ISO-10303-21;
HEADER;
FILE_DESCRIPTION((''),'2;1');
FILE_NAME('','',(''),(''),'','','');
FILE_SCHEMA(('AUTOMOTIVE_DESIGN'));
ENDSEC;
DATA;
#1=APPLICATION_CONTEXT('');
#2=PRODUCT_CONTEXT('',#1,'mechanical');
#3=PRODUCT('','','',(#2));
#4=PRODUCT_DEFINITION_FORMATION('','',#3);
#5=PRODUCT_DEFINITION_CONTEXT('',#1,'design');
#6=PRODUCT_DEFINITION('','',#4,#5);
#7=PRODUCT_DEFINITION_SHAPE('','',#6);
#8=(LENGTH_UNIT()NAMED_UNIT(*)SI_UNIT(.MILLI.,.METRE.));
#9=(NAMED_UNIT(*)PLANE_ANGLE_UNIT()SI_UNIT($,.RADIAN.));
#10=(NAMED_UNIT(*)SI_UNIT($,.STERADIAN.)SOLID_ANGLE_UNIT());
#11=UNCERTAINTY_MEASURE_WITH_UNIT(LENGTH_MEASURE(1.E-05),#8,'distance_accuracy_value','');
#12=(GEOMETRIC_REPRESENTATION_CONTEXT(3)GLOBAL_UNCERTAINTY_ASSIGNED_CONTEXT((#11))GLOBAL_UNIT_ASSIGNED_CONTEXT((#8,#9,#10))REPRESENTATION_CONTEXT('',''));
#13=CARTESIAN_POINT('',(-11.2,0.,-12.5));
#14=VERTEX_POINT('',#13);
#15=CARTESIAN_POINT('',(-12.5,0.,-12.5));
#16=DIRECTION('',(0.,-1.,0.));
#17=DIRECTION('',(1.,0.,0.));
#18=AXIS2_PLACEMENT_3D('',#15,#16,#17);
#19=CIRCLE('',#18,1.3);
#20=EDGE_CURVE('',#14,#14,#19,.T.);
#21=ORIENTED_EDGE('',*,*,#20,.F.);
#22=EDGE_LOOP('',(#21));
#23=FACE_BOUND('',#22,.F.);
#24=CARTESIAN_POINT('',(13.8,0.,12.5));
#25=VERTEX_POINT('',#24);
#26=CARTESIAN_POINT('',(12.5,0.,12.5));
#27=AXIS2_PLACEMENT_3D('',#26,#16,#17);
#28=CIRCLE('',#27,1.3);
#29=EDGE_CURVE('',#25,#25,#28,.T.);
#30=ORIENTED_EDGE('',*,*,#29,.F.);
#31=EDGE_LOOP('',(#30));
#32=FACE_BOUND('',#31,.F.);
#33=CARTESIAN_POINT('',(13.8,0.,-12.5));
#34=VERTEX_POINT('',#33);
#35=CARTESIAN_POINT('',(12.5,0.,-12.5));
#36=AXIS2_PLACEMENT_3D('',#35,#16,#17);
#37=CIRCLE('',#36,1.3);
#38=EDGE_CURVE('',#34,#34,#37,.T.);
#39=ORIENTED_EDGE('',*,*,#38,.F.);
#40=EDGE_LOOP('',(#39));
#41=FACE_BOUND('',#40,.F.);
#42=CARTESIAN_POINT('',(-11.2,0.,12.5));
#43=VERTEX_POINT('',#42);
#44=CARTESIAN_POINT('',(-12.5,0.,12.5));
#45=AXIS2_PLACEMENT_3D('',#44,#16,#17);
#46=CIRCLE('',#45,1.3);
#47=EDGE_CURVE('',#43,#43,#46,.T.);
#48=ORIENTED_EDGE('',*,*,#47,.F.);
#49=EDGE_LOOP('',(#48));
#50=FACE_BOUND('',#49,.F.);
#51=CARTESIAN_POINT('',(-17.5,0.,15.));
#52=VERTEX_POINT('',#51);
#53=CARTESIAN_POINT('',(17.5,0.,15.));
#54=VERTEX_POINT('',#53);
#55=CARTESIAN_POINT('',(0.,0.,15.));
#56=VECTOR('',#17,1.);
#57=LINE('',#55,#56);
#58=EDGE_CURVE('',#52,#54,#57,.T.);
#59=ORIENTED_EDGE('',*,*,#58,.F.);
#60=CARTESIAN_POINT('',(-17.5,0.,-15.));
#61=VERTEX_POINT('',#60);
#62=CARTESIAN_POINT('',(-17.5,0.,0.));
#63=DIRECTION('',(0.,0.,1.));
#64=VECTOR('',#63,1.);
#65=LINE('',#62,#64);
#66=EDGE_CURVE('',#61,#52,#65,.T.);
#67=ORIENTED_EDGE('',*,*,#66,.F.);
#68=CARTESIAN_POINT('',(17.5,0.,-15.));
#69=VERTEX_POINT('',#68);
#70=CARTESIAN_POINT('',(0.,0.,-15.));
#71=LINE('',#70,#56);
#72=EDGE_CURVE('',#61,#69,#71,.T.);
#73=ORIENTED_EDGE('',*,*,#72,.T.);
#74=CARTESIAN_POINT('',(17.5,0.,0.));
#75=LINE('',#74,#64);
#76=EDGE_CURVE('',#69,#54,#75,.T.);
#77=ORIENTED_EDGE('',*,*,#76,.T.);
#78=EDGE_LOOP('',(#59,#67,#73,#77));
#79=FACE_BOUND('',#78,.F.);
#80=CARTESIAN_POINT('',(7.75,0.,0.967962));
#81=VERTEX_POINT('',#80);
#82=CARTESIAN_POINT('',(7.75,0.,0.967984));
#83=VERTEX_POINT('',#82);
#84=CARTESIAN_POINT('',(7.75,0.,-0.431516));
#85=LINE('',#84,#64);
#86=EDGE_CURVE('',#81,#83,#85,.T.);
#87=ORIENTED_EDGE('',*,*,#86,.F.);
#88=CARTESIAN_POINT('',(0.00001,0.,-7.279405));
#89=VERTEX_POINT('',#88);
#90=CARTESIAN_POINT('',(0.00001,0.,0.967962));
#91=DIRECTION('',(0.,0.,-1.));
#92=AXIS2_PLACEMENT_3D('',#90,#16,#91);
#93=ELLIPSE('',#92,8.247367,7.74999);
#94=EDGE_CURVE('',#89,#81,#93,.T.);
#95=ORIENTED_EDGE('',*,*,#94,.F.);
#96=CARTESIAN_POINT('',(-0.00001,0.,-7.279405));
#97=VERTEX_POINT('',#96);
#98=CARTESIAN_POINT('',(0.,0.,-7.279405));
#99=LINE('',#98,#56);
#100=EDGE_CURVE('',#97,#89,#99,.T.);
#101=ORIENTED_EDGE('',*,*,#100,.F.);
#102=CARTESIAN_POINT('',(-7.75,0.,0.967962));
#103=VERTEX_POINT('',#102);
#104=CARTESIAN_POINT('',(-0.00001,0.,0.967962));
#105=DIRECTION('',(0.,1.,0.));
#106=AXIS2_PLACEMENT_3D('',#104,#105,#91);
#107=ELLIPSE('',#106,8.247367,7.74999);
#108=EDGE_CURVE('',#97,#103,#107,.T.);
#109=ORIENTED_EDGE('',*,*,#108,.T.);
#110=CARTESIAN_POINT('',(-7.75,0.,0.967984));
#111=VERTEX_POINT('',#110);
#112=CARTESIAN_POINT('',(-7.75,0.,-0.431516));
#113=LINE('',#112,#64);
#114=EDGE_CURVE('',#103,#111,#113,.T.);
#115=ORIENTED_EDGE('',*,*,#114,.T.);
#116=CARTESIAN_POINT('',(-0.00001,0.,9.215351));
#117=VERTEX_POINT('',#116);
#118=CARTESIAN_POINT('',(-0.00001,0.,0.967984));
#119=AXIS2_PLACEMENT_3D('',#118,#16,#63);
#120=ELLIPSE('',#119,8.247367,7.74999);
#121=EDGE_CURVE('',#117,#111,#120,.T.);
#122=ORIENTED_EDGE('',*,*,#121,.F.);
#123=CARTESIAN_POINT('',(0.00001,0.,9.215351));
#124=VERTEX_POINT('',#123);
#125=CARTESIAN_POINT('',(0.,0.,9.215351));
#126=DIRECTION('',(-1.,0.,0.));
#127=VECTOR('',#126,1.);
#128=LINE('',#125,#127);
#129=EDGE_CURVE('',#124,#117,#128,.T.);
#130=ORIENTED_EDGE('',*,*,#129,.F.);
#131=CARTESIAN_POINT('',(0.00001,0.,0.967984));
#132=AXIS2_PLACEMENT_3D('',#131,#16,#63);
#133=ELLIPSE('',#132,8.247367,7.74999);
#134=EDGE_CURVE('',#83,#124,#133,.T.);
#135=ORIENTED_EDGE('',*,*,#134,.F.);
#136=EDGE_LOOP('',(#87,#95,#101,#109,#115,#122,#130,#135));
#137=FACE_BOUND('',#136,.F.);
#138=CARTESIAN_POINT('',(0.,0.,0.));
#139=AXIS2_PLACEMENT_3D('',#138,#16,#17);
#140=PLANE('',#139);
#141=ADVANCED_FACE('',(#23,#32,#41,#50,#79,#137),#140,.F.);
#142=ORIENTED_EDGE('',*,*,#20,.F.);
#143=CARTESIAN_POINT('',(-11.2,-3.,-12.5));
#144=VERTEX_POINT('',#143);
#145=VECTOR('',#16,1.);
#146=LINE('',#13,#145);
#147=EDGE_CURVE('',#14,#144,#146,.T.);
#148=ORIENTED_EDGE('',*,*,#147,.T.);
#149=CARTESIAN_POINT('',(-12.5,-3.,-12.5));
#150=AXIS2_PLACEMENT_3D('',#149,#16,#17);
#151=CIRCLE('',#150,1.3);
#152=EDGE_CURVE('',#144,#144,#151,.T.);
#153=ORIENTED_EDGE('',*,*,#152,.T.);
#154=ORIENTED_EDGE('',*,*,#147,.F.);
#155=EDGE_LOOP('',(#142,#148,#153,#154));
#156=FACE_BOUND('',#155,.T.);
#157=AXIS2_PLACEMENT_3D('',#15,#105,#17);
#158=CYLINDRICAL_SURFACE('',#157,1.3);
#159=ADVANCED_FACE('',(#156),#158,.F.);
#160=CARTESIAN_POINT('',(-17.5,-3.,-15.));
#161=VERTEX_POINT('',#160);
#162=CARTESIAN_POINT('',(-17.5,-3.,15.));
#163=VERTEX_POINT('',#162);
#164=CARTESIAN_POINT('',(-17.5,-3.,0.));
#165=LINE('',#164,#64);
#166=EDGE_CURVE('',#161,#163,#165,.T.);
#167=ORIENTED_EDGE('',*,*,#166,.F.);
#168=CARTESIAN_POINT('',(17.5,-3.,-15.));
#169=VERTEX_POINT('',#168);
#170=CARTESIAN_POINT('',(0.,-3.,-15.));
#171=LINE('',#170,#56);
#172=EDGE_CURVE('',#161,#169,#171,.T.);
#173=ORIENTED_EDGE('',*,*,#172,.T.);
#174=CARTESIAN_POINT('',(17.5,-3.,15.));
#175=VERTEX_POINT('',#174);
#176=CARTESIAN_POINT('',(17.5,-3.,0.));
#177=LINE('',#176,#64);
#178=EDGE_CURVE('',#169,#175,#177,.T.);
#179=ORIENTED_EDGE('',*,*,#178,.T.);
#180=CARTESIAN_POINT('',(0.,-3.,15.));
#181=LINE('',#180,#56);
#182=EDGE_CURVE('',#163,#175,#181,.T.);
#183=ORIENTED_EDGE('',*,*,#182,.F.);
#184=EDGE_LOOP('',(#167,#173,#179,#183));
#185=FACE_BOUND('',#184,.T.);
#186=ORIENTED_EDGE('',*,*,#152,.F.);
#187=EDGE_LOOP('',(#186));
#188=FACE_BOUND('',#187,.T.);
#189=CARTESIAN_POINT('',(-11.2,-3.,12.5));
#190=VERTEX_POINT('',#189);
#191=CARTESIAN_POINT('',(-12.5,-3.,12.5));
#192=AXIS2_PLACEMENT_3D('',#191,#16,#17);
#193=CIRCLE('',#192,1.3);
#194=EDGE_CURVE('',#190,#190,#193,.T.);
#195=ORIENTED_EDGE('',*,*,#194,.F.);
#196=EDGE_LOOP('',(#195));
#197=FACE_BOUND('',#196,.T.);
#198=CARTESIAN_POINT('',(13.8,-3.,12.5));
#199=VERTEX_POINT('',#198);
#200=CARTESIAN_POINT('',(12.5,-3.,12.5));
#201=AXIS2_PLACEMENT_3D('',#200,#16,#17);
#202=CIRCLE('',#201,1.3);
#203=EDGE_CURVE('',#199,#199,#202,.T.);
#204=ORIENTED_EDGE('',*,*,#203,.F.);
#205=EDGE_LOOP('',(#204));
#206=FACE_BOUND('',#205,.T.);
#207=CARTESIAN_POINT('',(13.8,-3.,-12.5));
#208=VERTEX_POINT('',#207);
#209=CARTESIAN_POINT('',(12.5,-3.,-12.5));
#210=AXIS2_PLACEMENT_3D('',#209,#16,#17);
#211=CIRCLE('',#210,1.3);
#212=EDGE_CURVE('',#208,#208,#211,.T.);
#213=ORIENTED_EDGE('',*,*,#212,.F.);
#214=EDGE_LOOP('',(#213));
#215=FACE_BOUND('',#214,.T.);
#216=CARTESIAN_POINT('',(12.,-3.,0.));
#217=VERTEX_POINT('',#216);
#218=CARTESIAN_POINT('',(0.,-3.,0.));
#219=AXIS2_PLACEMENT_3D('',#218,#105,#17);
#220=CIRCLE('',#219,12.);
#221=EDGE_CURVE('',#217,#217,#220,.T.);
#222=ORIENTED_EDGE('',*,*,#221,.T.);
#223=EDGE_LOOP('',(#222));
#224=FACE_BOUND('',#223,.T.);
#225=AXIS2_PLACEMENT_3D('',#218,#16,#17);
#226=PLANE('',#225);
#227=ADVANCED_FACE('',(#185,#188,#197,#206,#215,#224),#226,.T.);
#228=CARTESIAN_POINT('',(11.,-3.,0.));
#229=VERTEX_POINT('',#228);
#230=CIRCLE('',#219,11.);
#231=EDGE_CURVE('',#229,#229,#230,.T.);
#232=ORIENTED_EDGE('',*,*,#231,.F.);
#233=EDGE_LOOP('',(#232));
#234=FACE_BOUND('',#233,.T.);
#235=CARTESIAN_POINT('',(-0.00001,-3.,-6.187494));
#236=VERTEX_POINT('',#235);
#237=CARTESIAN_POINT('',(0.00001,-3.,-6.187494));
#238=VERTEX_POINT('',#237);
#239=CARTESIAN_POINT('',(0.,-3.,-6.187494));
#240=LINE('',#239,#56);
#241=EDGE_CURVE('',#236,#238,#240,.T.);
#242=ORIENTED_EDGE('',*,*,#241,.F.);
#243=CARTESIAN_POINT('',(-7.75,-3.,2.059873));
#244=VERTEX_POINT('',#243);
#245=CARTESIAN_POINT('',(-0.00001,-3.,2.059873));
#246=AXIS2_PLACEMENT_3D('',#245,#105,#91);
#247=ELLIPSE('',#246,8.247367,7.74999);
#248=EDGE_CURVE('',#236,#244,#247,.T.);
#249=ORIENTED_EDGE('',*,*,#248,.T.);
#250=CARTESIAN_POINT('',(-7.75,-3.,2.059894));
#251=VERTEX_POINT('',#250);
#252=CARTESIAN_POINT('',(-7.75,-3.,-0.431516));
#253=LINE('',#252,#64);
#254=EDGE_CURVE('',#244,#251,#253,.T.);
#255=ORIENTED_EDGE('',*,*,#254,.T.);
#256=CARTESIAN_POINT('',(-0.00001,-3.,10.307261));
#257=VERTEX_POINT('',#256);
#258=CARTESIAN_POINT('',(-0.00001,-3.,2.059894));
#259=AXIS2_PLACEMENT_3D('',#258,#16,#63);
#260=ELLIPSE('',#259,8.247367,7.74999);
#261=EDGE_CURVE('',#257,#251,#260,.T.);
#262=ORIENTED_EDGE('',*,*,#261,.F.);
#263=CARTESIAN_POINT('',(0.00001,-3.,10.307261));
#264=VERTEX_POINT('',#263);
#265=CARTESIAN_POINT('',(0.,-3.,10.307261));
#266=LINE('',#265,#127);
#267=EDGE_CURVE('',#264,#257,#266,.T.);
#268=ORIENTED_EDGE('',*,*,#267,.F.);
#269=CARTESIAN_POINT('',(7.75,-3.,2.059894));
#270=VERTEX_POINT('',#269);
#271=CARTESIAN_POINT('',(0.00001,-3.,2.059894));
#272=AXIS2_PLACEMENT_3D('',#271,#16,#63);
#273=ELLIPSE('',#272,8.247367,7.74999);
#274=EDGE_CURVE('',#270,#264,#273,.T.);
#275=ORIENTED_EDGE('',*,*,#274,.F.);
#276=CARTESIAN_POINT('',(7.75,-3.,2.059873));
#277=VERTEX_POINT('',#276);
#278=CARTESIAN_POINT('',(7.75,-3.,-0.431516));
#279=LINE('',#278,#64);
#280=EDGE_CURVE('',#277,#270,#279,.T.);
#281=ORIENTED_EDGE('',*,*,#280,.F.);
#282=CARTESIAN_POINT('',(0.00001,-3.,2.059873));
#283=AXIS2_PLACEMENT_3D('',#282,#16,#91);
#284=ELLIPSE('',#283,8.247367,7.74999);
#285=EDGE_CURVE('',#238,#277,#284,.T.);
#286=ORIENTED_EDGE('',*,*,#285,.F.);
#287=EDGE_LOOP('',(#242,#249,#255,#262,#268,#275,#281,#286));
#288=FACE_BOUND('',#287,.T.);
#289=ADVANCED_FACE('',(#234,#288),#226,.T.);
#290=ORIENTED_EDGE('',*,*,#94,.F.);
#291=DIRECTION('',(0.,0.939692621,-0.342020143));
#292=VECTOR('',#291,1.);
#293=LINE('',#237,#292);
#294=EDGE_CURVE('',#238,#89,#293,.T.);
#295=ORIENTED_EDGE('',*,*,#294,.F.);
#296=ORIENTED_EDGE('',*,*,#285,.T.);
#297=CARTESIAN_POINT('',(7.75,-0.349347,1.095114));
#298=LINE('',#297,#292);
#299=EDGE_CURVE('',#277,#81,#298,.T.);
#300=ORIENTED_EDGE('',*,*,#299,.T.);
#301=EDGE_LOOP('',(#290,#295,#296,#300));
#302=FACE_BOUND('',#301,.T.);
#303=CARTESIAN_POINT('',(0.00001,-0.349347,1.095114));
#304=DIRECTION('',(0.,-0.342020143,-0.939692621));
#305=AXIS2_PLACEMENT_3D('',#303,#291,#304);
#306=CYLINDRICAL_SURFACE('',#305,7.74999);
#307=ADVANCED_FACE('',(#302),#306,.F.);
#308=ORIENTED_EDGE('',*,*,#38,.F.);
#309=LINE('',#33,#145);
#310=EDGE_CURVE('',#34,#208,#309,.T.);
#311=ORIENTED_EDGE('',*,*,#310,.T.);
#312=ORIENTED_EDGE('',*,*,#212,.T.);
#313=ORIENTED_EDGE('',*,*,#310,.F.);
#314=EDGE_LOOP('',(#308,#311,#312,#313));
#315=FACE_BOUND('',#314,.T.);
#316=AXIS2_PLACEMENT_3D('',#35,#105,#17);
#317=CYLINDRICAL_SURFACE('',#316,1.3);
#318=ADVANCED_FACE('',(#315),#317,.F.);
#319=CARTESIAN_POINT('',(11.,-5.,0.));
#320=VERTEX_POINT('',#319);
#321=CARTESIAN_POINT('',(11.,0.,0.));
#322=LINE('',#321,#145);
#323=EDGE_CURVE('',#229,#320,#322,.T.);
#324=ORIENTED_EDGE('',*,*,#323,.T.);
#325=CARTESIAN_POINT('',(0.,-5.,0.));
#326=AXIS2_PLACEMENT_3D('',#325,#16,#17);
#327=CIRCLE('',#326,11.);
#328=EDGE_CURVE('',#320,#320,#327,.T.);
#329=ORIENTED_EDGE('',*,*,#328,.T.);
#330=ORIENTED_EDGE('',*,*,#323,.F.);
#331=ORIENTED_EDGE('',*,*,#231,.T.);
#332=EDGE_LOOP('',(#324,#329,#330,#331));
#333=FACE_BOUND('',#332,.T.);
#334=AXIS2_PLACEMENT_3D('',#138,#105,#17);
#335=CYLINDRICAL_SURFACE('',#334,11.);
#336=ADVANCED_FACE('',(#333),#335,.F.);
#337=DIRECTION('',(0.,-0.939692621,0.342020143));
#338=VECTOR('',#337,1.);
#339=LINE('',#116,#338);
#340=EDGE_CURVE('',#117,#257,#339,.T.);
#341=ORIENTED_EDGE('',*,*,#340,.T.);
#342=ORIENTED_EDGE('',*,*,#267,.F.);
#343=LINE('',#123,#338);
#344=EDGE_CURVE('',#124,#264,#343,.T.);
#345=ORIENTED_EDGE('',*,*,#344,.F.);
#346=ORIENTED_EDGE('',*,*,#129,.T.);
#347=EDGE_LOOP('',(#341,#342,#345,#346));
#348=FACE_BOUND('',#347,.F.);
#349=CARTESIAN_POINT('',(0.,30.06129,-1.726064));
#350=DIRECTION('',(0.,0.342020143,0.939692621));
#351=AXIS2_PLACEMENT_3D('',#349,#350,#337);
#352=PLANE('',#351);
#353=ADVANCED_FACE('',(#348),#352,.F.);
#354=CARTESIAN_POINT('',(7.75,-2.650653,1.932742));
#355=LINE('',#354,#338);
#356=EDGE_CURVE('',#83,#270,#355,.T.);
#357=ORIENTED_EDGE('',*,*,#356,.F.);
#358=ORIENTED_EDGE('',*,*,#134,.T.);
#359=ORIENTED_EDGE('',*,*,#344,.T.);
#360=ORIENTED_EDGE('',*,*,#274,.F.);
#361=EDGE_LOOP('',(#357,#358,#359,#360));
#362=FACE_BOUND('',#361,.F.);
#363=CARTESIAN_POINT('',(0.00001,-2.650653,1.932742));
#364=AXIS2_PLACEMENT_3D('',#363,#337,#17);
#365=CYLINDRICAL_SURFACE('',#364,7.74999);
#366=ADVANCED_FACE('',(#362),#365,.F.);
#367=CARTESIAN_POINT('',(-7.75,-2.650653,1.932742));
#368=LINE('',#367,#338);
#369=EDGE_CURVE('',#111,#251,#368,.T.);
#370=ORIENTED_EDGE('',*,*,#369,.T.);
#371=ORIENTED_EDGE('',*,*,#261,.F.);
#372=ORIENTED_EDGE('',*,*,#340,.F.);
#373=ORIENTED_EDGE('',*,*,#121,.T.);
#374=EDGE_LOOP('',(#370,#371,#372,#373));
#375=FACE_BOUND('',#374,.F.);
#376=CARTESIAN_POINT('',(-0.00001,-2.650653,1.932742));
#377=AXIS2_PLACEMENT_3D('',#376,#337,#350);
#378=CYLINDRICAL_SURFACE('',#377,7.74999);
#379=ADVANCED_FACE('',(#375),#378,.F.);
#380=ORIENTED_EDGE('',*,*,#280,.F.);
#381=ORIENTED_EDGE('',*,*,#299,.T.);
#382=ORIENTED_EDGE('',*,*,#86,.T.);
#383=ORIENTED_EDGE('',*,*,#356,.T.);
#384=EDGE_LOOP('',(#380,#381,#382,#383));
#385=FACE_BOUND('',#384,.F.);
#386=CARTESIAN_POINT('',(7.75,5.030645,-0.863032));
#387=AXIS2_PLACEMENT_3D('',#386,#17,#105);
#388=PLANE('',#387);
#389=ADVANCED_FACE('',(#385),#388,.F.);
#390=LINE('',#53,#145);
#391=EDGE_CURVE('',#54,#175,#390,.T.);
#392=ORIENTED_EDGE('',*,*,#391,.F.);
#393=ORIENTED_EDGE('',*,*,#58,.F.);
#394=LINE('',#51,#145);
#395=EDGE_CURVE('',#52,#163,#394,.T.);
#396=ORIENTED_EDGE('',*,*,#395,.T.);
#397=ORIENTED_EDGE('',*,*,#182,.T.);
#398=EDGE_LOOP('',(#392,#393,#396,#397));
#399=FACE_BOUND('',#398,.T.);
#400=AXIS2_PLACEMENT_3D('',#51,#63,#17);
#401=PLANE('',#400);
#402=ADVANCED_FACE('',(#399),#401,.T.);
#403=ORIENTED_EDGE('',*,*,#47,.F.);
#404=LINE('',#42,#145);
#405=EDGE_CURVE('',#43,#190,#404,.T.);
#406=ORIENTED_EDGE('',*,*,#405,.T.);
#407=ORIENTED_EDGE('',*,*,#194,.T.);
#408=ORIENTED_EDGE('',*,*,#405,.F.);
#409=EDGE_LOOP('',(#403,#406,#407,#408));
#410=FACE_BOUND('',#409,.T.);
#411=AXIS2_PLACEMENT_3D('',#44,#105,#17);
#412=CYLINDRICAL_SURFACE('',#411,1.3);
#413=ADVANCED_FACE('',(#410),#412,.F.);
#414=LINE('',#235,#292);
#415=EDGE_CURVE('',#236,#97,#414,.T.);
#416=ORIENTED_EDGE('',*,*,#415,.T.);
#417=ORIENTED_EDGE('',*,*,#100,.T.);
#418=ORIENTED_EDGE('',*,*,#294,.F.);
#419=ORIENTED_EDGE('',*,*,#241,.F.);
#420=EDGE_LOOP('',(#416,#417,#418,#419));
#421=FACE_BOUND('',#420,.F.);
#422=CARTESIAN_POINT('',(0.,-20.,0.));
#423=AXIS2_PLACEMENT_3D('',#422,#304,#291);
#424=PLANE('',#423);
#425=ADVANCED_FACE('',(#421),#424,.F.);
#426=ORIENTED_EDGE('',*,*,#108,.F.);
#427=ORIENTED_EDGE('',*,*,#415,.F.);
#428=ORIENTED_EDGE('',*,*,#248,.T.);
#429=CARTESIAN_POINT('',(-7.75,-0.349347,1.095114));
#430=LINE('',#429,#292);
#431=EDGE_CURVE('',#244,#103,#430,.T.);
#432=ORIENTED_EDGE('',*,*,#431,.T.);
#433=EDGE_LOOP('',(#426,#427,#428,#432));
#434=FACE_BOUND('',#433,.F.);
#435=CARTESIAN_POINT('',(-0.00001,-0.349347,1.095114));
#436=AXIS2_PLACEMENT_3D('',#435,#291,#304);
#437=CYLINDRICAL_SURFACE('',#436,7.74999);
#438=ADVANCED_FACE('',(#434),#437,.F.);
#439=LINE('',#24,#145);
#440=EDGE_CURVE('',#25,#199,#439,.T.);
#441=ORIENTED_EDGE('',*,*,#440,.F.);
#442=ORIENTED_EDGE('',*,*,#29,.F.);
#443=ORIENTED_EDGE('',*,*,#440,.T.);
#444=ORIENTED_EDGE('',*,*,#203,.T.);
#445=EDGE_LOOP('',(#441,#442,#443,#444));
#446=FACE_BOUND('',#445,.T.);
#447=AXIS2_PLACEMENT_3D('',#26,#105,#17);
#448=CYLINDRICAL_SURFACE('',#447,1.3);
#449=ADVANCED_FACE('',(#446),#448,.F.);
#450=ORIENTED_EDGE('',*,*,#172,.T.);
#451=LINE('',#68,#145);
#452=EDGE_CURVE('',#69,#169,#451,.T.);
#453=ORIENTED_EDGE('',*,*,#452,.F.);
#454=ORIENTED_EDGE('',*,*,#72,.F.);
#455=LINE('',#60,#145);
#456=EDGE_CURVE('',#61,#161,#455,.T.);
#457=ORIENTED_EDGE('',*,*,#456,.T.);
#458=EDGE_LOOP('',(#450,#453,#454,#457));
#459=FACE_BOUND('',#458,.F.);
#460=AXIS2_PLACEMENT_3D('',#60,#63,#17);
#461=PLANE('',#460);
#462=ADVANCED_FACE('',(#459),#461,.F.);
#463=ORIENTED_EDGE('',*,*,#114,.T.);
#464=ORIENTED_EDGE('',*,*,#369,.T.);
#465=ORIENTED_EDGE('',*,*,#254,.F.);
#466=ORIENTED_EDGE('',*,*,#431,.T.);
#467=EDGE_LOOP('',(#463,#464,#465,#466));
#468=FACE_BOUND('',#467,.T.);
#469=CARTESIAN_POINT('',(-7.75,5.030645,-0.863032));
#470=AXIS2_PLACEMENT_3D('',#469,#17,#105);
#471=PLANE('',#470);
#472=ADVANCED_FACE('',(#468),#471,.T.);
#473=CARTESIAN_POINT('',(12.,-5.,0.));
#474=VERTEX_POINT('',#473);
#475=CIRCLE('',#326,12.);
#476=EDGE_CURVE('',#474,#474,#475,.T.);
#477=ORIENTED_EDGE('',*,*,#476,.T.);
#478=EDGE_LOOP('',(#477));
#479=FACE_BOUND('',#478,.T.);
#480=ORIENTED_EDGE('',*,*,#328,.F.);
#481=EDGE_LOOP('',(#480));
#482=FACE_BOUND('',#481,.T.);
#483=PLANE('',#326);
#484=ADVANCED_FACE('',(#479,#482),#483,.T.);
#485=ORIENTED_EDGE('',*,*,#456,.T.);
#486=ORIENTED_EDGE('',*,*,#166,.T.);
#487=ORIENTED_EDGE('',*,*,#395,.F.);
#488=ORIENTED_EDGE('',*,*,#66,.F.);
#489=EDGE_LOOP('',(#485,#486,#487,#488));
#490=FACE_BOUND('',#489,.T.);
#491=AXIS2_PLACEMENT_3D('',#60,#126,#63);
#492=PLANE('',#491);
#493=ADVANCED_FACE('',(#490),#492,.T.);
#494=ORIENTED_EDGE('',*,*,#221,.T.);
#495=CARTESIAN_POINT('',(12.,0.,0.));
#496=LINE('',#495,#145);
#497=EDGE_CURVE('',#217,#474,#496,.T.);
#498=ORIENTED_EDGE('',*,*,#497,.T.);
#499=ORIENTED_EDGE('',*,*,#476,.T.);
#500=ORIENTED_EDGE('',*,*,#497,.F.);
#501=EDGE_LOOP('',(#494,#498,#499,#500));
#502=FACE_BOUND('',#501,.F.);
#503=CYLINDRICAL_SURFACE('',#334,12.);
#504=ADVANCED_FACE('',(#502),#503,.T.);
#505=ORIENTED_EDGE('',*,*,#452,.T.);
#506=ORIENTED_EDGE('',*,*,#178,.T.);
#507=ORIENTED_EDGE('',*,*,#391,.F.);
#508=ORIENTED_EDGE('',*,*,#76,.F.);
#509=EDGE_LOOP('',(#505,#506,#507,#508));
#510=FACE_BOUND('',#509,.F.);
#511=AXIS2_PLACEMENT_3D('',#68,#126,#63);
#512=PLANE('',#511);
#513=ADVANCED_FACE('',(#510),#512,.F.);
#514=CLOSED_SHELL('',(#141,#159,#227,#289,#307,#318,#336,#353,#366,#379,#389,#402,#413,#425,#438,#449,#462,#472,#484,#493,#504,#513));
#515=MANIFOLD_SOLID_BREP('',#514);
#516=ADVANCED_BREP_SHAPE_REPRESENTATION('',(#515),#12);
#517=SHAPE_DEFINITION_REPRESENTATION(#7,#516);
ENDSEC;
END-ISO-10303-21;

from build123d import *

# Parameters (mm, degrees)
F0_W     = 35
F0_H     = 30
F0_R     = 1.3
F0_R_2   = 12
F0_R_3   = 11
F1_DEPTH = 3
F3_DEPTH = 7.75
F4_R     = 7.74999
F5_DEPTH = 5


# Not quite as in the source:
# - a fillet or chamfer is up to 0.001 mm smaller than in the source, because OpenCascade refuses the exact size


with BuildPart() as f1:
    # F0 (on Front) → F1 (new body)
    with BuildSketch(Plane.XZ):
        Rectangle(F0_W, F0_H)
        with Locations((-12.5, -12.5)):
            Circle(F0_R, mode=Mode.SUBTRACT)
        with Locations((12.5, -12.5)):
            Circle(F0_R, mode=Mode.SUBTRACT)
        with Locations((-12.5, 12.5)):
            Circle(F0_R, mode=Mode.SUBTRACT)
        Circle(F0_R_2, mode=Mode.SUBTRACT)
        with Locations((12.5, 12.5)):
            Circle(F0_R, mode=Mode.SUBTRACT)
        Circle(F0_R_2)
        Circle(F0_R_3, mode=Mode.SUBTRACT)
        Circle(F0_R_3)
    extrude(amount=F1_DEPTH)

    # F2 (on Right) → F3 (cut, symmetric)
    with BuildSketch(Plane.YZ):
        Polygon((24.7599773954, -16.2912994583), (30.0612896169, -1.7260638362), (-14.6986877785, 14.5652356222), (-20, 0), align=None)
    extrude(amount=F3_DEPTH, both=True, mode=Mode.SUBTRACT)

    # F4 (radius 7.75 in the source; OpenCascade refuses exactly that, so slightly less here)
    f4_edges = [f1.edges().sort_by_distance(p)[0] for p in [
        (7.75, -1.5, 9.761306),
        (-7.75, -1.5, 9.761306),
        (-7.75, -1.5, -6.733449),
        (7.75, -1.5, -6.733449),
    ]]
    fillet(f4_edges, radius=F4_R)

    # F0 (on Front) → F5 (join)
    with BuildSketch(Plane.XZ):
        Circle(F0_R_2)
        Circle(F0_R_3, mode=Mode.SUBTRACT)
    extrude(amount=F5_DEPTH)


solid = f1.part
